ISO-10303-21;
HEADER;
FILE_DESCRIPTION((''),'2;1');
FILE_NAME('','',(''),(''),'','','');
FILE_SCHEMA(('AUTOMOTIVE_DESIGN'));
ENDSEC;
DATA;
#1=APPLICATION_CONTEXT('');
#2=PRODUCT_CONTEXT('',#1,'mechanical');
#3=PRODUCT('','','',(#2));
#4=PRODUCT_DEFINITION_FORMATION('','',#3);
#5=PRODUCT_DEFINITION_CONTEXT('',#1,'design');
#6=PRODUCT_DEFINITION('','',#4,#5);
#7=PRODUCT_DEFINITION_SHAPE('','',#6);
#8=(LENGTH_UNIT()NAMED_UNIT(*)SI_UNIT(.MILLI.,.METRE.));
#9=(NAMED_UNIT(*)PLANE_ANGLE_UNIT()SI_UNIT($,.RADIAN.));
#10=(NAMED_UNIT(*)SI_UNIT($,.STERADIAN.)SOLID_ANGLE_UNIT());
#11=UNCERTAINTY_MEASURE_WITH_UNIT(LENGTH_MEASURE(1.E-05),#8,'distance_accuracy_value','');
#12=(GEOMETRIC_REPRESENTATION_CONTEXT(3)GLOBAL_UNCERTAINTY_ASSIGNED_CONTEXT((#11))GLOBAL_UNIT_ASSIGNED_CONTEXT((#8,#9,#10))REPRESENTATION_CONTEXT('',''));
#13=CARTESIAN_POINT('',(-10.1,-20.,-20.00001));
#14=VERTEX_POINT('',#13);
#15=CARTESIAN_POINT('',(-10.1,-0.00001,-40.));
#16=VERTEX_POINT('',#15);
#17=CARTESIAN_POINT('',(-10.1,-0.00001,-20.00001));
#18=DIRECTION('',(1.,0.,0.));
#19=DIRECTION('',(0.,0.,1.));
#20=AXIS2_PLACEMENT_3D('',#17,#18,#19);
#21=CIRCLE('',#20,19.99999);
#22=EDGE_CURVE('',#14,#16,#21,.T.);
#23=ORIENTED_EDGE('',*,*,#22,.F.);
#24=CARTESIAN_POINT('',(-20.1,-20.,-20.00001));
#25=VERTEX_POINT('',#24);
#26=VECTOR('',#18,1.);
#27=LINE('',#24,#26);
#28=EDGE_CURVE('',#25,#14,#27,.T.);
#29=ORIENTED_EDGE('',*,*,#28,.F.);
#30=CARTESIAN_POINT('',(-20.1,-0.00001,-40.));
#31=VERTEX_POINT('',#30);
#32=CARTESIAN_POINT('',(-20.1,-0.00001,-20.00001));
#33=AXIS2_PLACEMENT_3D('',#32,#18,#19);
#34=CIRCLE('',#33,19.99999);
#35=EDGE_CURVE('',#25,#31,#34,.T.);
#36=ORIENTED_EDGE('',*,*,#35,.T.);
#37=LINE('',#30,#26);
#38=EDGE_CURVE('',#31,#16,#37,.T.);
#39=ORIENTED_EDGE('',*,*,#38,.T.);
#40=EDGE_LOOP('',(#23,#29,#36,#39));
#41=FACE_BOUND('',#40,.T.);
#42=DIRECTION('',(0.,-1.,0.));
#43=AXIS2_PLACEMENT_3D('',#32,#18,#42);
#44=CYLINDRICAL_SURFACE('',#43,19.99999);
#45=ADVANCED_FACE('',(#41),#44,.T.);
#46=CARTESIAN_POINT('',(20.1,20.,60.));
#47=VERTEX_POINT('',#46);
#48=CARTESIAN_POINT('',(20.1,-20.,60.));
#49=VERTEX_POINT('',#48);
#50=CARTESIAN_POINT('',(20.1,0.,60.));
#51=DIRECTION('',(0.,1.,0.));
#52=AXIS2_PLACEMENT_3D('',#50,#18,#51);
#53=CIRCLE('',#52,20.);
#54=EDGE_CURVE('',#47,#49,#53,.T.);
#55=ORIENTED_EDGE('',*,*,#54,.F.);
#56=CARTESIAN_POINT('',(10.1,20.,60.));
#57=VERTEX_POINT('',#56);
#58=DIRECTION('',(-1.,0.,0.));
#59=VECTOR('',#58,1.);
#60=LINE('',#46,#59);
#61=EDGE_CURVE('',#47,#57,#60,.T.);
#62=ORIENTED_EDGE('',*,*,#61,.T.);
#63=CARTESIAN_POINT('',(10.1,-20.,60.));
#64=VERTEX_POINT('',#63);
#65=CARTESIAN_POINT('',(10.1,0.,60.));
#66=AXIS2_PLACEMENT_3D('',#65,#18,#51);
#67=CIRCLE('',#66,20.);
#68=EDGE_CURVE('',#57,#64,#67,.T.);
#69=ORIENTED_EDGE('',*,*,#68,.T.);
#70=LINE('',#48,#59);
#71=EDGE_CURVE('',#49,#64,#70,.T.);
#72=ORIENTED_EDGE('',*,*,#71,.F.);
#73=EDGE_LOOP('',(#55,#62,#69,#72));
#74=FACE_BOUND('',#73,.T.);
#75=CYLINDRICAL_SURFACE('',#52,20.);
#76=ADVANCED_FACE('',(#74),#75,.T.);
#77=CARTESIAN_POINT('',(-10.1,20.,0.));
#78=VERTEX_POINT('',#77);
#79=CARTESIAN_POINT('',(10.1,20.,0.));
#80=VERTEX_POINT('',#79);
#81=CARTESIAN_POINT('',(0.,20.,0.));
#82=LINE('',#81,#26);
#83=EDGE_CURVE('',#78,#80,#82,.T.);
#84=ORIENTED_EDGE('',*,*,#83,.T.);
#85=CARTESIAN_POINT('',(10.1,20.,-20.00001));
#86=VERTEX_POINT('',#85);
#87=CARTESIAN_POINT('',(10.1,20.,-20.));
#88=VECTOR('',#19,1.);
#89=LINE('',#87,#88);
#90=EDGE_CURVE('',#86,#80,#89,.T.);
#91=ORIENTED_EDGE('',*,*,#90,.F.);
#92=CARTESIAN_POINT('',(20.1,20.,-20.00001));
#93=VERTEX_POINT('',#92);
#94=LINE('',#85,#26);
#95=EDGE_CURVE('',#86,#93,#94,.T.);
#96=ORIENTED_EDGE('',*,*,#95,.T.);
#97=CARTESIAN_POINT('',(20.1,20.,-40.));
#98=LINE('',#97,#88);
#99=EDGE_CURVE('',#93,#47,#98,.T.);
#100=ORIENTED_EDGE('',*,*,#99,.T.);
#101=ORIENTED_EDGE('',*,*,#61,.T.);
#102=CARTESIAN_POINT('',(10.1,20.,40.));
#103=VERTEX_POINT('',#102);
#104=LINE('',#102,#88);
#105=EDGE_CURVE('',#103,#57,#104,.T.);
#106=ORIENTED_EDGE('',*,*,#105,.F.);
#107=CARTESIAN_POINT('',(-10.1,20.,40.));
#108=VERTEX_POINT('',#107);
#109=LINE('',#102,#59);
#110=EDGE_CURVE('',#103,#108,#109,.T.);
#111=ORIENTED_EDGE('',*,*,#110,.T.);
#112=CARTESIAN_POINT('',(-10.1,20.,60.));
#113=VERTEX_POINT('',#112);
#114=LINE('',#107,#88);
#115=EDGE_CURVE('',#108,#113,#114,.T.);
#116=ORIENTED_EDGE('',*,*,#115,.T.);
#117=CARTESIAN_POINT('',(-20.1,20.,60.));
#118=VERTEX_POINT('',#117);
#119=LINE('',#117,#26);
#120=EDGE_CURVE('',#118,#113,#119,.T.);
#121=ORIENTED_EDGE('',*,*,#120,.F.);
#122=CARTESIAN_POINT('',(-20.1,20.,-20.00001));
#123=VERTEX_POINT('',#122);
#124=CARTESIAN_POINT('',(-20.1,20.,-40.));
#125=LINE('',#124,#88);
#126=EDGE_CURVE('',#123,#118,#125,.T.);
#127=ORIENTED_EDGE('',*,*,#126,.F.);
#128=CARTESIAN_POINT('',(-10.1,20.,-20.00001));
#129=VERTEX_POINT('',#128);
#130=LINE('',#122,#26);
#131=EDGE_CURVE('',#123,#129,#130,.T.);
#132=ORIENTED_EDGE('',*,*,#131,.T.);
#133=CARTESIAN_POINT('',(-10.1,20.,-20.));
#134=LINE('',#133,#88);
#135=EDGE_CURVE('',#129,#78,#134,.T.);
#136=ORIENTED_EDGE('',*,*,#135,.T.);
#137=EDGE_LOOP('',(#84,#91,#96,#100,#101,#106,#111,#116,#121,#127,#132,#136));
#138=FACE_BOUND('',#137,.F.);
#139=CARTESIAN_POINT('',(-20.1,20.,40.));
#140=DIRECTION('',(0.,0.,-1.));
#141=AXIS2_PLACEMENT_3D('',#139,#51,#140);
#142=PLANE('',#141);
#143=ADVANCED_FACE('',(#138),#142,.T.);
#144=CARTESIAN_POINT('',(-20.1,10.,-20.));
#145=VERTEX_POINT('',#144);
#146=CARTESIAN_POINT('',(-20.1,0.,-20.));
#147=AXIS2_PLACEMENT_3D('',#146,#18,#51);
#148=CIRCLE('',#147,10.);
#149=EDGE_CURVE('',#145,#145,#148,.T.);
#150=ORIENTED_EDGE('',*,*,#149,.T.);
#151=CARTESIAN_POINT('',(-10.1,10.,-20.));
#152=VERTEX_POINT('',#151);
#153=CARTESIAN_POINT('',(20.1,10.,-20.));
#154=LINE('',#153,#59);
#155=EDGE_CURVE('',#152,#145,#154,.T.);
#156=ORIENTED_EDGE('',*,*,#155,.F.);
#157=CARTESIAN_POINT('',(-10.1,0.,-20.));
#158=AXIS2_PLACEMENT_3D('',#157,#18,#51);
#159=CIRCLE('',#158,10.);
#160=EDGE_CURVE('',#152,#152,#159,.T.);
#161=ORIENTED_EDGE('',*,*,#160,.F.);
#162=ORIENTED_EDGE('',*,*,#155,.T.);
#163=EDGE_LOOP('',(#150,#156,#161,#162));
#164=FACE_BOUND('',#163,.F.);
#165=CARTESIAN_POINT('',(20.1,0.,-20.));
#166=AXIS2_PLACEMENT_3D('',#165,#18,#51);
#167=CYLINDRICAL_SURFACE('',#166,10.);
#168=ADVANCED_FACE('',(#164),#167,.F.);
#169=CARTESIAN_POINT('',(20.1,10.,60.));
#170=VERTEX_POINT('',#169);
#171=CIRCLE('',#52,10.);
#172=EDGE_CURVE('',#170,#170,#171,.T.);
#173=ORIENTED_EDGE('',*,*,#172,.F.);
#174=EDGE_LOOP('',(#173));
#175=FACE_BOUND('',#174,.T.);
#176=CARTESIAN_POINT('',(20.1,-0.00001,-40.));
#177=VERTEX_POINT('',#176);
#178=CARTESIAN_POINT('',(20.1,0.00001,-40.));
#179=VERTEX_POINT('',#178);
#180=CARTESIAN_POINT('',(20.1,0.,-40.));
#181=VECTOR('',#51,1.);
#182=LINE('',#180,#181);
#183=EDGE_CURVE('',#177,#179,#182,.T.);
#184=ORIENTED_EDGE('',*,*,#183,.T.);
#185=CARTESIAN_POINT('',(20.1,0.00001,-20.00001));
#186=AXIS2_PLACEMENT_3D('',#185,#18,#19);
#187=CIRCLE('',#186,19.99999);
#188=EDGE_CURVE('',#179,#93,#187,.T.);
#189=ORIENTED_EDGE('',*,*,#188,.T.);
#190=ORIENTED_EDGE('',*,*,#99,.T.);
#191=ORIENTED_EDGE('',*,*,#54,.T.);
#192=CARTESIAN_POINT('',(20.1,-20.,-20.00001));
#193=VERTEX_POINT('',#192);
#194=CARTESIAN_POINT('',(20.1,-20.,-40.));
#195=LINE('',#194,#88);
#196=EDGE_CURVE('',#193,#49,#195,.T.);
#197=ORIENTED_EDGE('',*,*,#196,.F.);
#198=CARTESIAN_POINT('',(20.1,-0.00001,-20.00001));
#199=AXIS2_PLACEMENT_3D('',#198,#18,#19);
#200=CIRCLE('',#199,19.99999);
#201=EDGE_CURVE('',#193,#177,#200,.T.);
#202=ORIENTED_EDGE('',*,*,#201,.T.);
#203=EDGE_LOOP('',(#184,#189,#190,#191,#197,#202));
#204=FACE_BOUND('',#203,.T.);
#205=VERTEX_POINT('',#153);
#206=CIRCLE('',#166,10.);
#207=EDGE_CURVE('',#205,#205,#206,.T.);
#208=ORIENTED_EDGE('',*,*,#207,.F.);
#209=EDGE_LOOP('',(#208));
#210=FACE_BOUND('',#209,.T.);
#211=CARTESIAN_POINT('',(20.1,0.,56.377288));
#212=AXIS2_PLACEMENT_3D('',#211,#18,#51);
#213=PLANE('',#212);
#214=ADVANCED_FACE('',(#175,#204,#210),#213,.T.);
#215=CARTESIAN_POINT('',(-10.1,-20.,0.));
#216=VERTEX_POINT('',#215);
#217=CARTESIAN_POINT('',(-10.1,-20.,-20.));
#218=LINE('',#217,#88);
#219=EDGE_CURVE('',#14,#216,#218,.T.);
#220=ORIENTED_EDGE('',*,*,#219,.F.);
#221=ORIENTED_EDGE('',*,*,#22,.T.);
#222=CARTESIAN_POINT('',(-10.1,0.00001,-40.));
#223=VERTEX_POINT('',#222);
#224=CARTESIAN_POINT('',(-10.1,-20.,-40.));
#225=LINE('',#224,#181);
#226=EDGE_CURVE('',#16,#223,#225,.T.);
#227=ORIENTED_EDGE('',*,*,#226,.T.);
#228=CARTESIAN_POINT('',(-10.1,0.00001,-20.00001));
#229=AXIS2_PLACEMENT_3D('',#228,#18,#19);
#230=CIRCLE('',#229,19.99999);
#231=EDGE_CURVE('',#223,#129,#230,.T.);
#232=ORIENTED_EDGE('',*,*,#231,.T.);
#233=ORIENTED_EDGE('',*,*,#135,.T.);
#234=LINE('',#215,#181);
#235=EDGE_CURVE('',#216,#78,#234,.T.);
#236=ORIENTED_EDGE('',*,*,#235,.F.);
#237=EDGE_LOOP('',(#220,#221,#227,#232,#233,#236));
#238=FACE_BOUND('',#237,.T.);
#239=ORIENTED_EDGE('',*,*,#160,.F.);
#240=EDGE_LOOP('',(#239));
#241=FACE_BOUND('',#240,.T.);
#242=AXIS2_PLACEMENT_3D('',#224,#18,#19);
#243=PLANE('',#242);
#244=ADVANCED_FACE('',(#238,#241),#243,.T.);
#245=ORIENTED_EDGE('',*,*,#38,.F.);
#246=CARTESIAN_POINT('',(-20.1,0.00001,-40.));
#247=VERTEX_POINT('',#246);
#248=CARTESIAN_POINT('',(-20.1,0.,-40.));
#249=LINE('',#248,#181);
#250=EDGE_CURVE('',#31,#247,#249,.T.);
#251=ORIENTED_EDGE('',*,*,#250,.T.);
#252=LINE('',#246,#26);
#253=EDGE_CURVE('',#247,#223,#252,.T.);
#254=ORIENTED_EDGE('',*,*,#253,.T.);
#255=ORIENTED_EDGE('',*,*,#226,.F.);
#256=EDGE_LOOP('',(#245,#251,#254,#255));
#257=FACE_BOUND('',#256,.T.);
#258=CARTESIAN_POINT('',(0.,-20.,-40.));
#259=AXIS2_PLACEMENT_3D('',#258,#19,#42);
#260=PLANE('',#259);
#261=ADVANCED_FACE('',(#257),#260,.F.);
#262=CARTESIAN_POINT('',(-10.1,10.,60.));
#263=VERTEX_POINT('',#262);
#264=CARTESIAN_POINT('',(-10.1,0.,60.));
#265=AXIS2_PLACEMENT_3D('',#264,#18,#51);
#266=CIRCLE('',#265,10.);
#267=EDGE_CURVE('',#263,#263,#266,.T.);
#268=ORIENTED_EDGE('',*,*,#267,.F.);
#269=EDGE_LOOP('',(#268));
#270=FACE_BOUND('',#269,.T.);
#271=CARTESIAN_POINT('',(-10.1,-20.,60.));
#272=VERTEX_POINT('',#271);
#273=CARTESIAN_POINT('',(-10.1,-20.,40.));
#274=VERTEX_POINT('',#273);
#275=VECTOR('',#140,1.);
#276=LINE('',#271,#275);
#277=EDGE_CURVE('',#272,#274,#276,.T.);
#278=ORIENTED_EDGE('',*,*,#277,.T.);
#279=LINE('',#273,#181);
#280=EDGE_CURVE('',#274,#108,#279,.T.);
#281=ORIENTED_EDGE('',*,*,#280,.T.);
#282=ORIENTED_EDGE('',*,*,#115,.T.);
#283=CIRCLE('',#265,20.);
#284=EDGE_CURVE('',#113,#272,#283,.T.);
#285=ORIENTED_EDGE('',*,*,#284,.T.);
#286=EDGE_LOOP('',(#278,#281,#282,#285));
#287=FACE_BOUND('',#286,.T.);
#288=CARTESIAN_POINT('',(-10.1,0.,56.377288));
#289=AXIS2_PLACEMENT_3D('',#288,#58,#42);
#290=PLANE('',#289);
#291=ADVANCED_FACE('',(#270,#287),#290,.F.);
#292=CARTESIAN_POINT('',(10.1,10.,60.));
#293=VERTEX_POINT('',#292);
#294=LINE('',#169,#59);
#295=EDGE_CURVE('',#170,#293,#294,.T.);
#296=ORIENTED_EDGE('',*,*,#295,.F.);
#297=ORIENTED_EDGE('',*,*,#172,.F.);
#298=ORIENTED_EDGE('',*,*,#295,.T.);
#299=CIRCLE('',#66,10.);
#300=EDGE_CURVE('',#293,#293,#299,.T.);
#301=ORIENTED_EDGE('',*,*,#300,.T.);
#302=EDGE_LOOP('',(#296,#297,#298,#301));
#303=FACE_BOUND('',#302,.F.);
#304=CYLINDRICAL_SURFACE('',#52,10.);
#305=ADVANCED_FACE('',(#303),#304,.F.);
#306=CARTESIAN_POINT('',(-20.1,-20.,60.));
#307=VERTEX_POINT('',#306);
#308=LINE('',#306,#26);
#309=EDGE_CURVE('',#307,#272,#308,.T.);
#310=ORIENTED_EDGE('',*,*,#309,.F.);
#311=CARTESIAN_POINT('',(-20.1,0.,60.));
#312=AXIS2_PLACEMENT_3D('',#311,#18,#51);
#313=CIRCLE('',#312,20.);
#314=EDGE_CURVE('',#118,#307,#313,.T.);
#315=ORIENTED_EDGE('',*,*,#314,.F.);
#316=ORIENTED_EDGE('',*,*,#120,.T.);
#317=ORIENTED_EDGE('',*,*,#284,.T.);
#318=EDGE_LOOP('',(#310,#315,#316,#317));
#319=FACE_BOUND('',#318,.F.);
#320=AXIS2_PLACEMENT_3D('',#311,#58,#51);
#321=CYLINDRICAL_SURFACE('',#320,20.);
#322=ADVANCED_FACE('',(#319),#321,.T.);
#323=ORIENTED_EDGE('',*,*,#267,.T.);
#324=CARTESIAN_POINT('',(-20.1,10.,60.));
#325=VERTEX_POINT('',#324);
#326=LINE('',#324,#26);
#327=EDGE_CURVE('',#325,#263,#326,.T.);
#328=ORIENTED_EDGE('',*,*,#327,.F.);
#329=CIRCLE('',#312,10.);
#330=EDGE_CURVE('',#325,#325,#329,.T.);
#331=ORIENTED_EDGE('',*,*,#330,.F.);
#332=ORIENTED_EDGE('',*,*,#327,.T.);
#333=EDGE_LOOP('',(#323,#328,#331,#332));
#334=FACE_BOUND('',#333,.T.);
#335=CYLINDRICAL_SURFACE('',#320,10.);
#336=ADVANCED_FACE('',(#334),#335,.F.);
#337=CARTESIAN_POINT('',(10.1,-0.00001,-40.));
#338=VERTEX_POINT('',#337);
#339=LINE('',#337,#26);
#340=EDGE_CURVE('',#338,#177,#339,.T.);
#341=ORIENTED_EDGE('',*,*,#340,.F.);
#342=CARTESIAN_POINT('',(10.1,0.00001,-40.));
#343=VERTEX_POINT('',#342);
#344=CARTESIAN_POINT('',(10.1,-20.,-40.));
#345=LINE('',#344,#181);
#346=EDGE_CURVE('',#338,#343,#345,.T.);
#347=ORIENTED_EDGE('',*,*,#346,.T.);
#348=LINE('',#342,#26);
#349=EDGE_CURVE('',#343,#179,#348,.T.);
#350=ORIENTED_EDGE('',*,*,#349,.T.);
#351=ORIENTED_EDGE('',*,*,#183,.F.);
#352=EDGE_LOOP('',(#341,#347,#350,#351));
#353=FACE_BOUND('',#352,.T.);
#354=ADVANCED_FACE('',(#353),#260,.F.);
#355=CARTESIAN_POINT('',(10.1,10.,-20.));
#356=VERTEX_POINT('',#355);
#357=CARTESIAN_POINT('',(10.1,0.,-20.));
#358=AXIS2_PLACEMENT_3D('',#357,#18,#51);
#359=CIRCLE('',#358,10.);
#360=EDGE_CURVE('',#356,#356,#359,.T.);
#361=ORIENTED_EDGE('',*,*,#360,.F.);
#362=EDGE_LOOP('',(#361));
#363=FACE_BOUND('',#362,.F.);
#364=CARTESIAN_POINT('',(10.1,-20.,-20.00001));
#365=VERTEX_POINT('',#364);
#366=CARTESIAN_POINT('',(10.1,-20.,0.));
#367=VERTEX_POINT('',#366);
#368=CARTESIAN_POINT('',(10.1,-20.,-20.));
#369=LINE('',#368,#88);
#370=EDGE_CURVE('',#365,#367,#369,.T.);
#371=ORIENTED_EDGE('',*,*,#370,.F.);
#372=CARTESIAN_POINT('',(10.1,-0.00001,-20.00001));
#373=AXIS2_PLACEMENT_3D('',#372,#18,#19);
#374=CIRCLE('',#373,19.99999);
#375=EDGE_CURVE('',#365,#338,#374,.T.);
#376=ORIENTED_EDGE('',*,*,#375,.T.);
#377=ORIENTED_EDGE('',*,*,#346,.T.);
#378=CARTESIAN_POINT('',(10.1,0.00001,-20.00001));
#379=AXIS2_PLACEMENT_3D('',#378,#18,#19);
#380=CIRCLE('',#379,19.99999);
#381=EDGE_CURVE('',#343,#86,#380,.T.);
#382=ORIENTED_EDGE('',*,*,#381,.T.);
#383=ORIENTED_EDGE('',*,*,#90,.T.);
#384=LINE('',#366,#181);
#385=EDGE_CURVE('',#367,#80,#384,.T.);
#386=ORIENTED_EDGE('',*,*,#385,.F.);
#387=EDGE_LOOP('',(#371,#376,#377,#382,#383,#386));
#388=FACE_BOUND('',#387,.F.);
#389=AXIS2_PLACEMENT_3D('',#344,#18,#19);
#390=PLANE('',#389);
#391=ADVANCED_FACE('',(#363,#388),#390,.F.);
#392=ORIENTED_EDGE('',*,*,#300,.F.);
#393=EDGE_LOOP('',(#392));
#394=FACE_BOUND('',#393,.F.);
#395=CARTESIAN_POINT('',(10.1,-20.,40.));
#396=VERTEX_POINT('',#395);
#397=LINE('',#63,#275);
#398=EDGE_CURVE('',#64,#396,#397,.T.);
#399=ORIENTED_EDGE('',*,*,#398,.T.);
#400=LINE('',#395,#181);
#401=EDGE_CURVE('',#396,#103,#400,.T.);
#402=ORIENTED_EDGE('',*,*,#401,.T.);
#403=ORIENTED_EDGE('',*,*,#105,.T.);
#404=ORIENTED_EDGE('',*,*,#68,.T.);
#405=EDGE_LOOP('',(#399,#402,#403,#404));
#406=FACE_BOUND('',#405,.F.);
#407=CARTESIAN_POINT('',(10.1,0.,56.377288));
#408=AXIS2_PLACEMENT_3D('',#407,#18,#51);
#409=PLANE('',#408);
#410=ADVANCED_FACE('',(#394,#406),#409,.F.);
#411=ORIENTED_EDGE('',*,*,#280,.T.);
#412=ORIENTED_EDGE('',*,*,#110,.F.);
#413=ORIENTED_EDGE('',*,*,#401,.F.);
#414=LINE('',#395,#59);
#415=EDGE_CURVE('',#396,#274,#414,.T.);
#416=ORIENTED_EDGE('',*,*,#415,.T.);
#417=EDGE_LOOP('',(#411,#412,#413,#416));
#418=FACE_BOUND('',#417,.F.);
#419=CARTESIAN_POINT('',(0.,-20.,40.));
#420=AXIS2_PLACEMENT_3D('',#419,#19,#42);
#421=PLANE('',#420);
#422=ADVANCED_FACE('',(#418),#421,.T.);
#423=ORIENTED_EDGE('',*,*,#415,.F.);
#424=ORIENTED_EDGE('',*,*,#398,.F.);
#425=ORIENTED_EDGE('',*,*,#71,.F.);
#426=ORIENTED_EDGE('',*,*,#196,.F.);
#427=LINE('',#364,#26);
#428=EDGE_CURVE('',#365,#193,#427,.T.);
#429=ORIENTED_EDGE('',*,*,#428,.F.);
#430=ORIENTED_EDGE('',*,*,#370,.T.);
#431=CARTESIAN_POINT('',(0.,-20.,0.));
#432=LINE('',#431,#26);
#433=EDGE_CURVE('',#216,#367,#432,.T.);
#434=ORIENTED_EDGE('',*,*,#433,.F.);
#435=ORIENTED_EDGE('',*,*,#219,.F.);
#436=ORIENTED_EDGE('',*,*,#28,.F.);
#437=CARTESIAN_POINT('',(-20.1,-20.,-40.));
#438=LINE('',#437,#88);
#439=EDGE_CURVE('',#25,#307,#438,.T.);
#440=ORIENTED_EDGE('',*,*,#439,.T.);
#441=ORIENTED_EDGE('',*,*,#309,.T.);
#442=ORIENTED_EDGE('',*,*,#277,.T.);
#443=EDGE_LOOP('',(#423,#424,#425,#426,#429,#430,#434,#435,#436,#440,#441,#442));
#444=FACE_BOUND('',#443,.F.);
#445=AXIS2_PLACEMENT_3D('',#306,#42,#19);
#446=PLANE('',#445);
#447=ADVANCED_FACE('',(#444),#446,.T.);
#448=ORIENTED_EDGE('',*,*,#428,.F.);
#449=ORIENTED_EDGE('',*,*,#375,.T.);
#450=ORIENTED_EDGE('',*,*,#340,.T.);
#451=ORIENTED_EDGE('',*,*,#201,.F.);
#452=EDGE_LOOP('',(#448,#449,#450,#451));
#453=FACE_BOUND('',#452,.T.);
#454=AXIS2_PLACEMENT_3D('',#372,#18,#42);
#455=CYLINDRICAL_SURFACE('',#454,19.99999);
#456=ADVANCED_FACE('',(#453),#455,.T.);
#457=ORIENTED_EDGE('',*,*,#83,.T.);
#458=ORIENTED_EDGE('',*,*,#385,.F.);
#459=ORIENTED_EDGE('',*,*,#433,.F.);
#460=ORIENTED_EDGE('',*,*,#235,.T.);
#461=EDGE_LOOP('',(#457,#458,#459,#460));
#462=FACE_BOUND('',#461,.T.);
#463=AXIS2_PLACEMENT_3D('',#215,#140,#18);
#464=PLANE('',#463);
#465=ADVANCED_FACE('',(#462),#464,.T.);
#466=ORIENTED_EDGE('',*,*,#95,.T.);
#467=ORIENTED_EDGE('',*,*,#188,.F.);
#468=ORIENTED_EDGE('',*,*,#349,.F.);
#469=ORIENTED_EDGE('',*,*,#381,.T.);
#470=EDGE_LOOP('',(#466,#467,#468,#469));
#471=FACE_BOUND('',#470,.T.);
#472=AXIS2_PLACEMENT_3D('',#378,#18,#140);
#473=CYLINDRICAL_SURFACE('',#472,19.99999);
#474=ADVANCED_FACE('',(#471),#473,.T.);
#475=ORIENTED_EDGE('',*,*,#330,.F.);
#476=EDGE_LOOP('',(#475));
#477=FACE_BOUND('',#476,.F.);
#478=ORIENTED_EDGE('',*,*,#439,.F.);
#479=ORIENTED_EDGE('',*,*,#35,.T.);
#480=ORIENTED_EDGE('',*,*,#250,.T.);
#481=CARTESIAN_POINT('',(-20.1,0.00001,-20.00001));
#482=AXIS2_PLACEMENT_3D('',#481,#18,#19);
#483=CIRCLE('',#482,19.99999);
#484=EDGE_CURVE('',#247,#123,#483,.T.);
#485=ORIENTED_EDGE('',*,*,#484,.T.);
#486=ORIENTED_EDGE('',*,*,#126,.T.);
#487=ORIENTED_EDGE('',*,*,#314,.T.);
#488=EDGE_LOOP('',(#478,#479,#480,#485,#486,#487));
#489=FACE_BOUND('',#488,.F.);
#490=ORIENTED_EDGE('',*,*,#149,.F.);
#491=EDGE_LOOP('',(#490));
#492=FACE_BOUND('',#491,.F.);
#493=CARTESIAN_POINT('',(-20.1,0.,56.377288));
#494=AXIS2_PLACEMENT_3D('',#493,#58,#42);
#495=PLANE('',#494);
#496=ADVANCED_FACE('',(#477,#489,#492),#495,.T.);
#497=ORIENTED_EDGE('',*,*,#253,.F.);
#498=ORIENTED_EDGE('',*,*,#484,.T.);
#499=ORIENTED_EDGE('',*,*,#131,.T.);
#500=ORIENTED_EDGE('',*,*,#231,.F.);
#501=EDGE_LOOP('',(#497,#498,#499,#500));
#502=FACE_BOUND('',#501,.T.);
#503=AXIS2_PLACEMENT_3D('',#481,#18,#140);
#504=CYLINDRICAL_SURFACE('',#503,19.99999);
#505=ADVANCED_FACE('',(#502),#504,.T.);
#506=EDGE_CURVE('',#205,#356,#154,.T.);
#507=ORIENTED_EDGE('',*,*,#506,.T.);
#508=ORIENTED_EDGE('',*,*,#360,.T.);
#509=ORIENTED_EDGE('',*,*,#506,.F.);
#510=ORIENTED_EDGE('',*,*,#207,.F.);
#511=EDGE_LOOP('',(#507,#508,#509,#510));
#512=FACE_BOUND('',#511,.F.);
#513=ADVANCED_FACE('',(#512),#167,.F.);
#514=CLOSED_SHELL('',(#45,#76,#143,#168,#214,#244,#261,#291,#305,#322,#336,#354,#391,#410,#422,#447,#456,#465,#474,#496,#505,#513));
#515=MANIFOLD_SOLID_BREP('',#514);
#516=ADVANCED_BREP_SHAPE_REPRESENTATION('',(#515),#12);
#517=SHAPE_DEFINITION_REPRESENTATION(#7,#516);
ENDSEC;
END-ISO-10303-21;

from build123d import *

# Parameters (mm, degrees)
F0_W     = 40
F0_H     = 80
F1_DEPTH = 20.1
F2_R     = 10
F3_DEPTH = 10
F5_W     = 20.2
F5_H     = 40
F6_DEPTH = 40
F7_R     = 10
F8_DEPTH = 40.2
F9_R     = 19.99999


# Not quite as in the source:
# - a fillet or chamfer is up to 0.001 mm smaller than in the source, because OpenCascade refuses the exact size


with BuildPart() as f1:
    # F0 (on Right) → F1 (new body)
    with BuildSketch(Plane.YZ):
        Rectangle(F0_W, F0_H)
    extrude(amount=F1_DEPTH)

    # F2 (on face) → F3 (join)
    with BuildSketch(Plane.YZ.offset(20.1)):
        with BuildLine():
            Line((-20, 60), (-20, 40))
            Line((-20, 40), (20, 40))
            Line((20, 40), (20, 60))
            ThreePointArc((20, 60), (0, 80), (-20, 60))
        make_face()
        with Locations((0, 60)):
            Circle(F2_R, mode=Mode.SUBTRACT)
    extrude(amount=-F3_DEPTH)

    # F4: F1 across face


with BuildPart() as f1_1:
    add(f1.part)
    add(f1.part.mirror(Plane(origin=(0, 0, 0), x_dir=(0, 1, 0), z_dir=(-1, 0, 0))))

    # F5 (on face) → F6 (cut, through all)
    with BuildSketch(Plane.XZ.offset(20)):
        with Locations((0, -20)):
            Rectangle(F5_W, F5_H)
    extrude(amount=-F6_DEPTH, mode=Mode.SUBTRACT)

    # F7 (on face) → F8 (cut, through all)
    with BuildSketch(Plane.YZ.offset(20.1)):
        with Locations((0, -20)):
            Circle(F7_R)
    extrude(amount=-F8_DEPTH, mode=Mode.SUBTRACT)

    # F9 (radius 20 in the source; OpenCascade refuses exactly that, so slightly less here)
    f9_edges = [f1_1.edges().sort_by_distance(p)[0] for p in [
        (-15.1, 20, -40),
        (-15.1, -20, -40),
        (15.1, 20, -40),
        (15.1, -20, -40),
    ]]
    fillet(f9_edges, radius=F9_R)


solid = f1_1.part
